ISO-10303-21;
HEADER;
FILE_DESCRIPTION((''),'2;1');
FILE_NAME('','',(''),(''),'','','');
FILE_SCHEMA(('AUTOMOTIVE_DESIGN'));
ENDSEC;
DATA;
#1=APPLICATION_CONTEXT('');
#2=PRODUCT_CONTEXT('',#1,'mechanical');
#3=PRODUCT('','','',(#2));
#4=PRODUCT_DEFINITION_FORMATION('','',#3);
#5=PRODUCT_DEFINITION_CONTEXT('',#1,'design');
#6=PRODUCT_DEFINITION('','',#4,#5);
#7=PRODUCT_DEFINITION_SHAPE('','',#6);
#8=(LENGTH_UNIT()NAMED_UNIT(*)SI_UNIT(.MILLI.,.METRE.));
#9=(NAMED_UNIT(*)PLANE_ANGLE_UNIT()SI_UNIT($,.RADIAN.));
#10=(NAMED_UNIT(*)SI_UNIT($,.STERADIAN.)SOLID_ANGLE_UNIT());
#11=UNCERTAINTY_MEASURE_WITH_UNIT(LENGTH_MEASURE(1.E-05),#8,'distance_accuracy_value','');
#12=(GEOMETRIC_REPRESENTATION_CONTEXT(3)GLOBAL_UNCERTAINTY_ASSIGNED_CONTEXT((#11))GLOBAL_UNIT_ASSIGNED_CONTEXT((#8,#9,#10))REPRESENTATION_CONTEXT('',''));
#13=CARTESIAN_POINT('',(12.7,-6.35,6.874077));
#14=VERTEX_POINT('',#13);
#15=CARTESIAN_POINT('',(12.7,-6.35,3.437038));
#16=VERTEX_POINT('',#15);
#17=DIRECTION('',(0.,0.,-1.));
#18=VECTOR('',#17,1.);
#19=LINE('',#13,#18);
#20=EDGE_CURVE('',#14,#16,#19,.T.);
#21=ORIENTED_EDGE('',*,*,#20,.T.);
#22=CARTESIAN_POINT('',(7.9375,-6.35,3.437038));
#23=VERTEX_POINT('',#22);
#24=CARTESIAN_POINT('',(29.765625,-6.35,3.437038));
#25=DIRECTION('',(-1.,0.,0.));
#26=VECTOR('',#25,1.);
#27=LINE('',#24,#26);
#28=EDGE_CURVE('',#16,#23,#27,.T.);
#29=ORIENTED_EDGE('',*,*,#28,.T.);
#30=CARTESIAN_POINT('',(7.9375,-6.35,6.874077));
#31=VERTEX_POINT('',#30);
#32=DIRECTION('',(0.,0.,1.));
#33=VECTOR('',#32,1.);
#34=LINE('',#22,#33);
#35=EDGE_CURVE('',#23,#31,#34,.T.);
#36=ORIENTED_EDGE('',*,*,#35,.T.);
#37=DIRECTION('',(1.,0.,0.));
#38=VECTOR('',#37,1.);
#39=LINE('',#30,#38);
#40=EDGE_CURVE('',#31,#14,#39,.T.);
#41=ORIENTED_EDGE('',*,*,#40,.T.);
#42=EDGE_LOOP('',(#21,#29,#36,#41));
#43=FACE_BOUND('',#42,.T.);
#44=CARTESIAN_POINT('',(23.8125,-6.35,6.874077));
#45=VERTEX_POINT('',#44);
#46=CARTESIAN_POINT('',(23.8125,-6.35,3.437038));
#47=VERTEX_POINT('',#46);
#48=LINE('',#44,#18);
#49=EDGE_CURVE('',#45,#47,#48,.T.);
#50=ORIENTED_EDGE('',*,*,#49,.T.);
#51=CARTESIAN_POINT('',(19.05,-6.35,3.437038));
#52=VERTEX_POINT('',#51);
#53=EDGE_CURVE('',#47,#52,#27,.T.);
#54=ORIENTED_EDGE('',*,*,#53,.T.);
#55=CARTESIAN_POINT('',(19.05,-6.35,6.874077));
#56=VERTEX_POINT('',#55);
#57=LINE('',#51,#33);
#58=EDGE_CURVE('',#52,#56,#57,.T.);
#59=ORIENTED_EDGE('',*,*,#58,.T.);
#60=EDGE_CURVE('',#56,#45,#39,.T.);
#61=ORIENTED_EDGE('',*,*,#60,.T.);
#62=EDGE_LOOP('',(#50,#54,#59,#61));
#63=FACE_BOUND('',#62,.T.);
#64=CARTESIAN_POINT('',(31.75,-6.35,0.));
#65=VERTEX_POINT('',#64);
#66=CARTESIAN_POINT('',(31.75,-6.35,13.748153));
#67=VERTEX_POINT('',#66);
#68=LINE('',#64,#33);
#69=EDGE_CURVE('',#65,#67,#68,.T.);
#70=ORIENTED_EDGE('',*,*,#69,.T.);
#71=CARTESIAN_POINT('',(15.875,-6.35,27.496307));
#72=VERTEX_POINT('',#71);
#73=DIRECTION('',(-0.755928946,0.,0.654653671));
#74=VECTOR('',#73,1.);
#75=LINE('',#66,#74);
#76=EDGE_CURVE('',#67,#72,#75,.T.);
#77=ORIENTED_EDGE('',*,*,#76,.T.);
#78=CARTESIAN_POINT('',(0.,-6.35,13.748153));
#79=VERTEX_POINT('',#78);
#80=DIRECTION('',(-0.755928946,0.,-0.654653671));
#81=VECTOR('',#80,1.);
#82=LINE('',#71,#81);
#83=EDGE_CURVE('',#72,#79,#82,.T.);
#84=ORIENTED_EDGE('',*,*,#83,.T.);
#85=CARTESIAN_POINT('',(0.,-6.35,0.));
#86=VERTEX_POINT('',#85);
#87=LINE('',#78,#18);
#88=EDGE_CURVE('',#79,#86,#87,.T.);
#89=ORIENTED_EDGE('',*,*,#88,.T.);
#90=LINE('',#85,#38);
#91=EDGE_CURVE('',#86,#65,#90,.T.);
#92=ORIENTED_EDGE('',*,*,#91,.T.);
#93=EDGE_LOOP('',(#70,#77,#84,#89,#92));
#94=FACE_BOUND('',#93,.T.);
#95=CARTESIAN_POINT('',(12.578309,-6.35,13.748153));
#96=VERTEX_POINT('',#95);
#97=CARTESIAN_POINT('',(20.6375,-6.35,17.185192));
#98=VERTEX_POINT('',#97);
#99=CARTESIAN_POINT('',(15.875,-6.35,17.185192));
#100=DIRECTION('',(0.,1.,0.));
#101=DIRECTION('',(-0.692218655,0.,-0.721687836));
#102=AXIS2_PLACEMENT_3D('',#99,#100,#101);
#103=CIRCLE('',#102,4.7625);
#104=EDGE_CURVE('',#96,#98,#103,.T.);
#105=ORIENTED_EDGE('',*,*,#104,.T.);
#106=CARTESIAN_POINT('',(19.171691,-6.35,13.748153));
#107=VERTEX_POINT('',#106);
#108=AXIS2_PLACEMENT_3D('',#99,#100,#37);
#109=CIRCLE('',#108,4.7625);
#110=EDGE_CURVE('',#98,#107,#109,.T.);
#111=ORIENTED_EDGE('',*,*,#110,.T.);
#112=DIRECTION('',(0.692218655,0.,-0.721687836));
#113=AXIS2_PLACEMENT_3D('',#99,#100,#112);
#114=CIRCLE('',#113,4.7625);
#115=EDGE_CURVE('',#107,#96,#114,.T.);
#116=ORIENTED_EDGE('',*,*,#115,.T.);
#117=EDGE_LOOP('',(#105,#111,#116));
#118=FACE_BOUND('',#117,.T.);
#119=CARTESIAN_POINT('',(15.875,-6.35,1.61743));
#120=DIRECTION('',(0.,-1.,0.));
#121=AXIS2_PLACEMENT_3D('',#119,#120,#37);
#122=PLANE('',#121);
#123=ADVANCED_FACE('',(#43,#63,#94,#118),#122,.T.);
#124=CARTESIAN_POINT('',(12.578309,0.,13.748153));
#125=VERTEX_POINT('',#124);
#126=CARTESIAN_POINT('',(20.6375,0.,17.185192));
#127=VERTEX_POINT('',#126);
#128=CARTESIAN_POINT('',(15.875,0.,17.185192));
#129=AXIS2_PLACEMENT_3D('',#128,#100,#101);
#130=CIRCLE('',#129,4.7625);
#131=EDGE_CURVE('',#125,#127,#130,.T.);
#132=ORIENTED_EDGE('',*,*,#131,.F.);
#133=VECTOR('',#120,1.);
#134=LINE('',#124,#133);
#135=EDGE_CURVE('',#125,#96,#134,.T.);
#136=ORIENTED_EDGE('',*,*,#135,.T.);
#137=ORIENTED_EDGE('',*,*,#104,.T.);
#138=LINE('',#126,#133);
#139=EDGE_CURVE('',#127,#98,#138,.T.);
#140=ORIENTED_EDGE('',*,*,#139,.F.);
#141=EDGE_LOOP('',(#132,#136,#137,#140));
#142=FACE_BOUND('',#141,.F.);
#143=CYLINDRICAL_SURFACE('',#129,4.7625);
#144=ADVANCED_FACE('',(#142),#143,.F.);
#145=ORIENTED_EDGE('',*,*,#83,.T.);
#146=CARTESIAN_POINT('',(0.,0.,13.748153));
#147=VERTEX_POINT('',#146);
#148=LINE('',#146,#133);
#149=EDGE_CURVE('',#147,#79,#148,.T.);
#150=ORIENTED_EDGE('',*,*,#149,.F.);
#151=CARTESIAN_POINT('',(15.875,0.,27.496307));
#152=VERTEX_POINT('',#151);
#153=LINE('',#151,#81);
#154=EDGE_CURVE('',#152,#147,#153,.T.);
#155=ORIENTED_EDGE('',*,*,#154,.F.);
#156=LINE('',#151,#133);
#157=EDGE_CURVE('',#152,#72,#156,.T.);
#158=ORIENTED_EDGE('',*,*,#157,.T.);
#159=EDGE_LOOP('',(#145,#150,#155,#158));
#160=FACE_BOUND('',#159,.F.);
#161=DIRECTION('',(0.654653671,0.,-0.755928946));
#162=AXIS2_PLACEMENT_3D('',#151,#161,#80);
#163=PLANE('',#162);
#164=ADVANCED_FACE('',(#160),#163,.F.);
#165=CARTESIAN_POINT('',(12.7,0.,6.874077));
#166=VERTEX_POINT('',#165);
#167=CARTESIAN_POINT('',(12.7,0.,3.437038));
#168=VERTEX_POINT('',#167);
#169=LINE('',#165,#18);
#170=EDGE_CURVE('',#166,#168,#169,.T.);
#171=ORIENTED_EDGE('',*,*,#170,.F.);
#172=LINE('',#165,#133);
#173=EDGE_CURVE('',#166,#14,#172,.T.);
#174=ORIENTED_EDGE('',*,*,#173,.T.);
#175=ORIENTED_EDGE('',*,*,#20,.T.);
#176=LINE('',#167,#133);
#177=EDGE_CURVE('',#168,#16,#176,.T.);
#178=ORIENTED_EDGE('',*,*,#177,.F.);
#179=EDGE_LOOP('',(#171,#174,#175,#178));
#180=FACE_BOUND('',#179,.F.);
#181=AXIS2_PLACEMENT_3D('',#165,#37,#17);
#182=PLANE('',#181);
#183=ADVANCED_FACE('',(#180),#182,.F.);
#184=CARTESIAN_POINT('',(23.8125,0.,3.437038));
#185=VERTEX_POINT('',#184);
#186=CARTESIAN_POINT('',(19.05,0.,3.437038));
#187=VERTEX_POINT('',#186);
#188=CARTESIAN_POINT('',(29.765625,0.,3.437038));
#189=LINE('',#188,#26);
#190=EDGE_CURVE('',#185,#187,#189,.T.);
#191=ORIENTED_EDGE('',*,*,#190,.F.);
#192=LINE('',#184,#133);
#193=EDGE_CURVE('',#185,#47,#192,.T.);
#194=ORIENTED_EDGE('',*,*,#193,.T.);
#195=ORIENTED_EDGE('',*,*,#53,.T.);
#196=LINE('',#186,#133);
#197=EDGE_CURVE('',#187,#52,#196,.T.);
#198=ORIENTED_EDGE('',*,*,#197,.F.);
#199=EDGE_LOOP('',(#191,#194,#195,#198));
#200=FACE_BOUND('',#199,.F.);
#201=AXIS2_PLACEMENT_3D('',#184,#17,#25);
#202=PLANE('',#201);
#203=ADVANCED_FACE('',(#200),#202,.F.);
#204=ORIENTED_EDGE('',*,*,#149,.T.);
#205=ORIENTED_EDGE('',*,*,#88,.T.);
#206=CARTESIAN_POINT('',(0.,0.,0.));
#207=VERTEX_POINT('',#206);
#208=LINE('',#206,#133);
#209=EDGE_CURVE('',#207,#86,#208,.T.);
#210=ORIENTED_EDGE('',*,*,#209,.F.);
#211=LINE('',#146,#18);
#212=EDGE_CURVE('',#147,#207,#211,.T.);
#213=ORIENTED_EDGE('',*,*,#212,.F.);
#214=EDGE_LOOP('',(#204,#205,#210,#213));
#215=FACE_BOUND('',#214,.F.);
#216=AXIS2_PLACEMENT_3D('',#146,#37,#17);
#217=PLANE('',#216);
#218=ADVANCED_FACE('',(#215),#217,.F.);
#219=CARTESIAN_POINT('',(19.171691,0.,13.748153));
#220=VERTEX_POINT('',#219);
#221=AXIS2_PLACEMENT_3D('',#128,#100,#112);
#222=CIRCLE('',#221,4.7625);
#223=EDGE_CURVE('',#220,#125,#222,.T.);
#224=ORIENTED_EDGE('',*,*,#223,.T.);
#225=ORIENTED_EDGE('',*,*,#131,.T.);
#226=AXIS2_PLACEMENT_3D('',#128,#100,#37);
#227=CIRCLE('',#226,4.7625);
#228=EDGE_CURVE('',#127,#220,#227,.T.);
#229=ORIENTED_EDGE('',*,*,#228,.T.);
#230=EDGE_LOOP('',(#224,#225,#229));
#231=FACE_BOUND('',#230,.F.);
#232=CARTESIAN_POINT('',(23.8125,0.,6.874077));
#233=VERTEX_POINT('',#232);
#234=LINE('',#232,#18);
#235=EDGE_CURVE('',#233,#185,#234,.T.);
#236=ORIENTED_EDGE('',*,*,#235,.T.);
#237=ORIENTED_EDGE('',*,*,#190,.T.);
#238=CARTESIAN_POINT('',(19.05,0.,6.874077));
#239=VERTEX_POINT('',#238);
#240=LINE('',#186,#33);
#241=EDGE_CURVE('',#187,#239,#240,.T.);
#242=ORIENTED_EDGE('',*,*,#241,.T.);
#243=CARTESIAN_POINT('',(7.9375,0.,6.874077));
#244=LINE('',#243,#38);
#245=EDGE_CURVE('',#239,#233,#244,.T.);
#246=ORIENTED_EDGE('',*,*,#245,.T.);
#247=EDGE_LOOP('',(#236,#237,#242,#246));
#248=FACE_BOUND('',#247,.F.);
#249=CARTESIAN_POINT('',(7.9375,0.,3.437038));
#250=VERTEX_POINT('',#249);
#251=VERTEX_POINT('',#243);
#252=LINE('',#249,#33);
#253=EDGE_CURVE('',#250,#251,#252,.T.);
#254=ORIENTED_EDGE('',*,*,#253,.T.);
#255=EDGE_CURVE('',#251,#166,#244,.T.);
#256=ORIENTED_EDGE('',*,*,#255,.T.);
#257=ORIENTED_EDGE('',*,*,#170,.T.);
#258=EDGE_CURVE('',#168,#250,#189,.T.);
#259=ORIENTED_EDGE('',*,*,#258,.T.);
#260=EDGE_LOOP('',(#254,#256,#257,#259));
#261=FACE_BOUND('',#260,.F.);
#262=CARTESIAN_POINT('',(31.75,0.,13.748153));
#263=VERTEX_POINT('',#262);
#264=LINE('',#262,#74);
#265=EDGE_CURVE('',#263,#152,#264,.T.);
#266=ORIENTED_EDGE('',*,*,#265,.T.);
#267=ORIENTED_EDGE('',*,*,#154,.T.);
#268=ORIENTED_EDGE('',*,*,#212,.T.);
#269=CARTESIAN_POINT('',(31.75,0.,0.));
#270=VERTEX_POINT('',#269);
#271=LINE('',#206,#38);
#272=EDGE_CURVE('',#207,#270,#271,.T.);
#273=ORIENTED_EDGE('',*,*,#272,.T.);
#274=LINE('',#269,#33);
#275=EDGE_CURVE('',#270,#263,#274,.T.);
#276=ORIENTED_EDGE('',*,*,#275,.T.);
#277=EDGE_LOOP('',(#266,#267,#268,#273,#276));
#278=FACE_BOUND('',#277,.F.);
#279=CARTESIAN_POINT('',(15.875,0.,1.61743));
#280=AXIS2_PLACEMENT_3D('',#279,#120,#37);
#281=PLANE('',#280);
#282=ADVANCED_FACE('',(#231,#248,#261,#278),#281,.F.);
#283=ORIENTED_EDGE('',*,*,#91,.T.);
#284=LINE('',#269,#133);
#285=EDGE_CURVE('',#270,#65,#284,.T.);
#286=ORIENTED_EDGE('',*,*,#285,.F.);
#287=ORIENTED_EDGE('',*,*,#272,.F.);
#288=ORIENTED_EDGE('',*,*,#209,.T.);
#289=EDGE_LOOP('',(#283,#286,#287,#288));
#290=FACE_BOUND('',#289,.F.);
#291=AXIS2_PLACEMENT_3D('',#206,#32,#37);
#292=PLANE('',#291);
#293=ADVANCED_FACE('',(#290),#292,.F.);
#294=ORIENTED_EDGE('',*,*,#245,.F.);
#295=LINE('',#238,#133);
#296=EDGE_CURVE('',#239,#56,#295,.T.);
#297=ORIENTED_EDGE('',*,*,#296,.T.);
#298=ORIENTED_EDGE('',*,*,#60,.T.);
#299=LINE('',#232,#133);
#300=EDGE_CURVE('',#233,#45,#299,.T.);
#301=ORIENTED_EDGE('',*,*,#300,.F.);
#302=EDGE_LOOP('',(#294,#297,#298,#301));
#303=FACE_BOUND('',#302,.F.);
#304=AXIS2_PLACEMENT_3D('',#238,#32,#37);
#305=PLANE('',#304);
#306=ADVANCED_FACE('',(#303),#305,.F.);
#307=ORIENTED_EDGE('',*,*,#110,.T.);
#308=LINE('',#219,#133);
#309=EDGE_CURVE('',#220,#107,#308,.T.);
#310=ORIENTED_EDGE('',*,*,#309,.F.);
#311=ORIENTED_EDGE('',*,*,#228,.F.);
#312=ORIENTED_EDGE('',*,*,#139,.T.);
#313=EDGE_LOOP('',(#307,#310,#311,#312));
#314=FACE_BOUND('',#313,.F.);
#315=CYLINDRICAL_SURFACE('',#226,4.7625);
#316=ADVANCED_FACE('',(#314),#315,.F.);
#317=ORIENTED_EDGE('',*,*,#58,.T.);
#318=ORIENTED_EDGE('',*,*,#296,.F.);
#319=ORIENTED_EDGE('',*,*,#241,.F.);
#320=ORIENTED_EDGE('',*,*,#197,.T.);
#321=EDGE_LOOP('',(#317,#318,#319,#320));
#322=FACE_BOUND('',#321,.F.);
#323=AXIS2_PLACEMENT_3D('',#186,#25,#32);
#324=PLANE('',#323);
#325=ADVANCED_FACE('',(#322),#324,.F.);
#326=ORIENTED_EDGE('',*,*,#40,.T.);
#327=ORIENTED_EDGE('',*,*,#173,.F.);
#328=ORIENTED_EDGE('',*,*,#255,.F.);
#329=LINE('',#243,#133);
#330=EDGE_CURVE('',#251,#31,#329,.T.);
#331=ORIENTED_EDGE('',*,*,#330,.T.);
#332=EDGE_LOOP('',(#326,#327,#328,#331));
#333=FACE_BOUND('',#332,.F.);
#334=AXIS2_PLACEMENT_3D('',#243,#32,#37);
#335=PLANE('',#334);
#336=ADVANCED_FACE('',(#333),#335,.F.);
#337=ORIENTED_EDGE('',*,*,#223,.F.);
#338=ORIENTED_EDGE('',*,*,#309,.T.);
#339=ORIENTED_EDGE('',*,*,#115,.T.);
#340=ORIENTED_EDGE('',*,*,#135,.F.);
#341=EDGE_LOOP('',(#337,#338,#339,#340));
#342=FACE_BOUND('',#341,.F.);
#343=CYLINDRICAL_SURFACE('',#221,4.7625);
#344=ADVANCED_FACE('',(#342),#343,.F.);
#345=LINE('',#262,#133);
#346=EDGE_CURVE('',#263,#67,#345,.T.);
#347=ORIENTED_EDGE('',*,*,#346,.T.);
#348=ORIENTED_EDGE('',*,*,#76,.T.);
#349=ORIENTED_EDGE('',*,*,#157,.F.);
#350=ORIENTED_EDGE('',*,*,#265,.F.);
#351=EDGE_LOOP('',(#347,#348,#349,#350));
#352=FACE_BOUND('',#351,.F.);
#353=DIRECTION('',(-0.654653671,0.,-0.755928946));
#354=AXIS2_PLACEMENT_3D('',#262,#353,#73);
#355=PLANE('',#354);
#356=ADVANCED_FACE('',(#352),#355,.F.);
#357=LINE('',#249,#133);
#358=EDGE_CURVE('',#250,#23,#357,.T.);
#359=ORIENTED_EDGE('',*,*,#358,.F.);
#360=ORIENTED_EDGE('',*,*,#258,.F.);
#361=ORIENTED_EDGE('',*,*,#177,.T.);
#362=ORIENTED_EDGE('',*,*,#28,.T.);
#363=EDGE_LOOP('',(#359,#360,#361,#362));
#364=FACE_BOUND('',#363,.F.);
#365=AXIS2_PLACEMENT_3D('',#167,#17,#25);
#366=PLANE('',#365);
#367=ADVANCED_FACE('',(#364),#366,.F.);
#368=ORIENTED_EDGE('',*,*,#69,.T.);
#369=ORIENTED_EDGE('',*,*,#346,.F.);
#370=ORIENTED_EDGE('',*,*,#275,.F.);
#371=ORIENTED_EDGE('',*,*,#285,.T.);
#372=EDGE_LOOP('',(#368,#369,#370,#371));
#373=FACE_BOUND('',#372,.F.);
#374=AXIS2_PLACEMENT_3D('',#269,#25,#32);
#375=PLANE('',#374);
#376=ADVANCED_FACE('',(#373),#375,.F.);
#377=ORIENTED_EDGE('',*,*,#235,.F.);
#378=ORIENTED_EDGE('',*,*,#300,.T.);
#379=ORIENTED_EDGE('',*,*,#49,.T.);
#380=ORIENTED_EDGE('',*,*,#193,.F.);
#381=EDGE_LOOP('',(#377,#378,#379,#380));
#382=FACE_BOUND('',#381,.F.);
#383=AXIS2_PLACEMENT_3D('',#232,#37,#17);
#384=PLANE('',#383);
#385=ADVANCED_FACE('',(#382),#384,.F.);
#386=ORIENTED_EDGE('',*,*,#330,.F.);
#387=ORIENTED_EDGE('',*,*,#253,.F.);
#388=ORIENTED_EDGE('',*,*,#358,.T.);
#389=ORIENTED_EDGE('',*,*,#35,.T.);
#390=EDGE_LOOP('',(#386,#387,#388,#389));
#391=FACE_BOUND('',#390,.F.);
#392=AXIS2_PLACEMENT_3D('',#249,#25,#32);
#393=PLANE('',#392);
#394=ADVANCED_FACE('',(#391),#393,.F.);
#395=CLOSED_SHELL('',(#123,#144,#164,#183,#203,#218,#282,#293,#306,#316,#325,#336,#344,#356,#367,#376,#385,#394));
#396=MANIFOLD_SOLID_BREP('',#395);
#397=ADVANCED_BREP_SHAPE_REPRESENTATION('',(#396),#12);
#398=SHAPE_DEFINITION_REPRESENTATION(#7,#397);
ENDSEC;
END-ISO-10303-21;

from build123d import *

# Parameters (mm, degrees)
F1_DEPTH = 6.35


# Not quite as in the source:
# - a feature names something its author has since deleted; it is built from what else it names


with BuildPart() as f1:
    # F0 (on Front) → F1 (new body)
    with BuildSketch(Plane.XZ):
        Polygon((1.984375, 3.4370383213), (0, 0), (7.9375, 0), (15.875, 0), (31.75, 0), (29.765625, 3.4370383213), (23.8125, 3.4370383213), (19.05, 3.4370383213), (15.875, 3.4370383213), (12.7, 3.4370383213), (11.90625, 3.4370383213), (7.9375, 3.4370383213), align=None)
        Polygon((0, 3.4370383213), (0, 0), (1.984375, 3.4370383213), align=None)
        Polygon((0, 3.4370383213), (1.984375, 3.4370383213), (7.9375, 13.7481532851), (0, 13.7481532851), (0, 6.8740766425), align=None)
        with BuildLine():
            Line((7.9375, 13.7481532851), (1.984375, 3.4370383213))
            Line((1.984375, 3.4370383213), (7.9375, 3.4370383213))
            Line((7.9375, 3.4370383213), (7.9375, 6.8740766425))
            Line((7.9375, 6.8740766425), (12.7, 6.8740766425))
            Line((12.7, 6.8740766425), (15.875, 6.8740766425))
            Line((15.875, 6.8740766425), (19.05, 6.8740766425))
            Line((19.05, 6.8740766425), (23.8125, 6.8740766425))
            Line((23.8125, 6.8740766425), (23.8125, 3.4370383213))
            Line((23.8125, 3.4370383213), (29.765625, 3.4370383213))
            Line((29.765625, 3.4370383213), (23.8125, 13.7481532851))
            Line((23.8125, 13.7481532851), (19.1716913456, 13.7481532851))
            ThreePointArc((19.1716913456, 13.7481532851), (15.875, 12.4226916063), (12.5783086544, 13.7481532851))
            Line((12.5783086544, 13.7481532851), (7.9375, 13.7481532851))
        make_face()
        Polygon((0, 13.7481532851), (7.9375, 13.7481532851), (15.875, 27.4963065702), align=None)
        with BuildLine():
            Line((15.875, 27.4963065702), (7.9375, 13.7481532851))
            Line((7.9375, 13.7481532851), (12.5783086544, 13.7481532851))
            ThreePointArc((12.5783086544, 13.7481532851), (14.0067235595, 21.56593919), (20.6375, 17.1851916063))
            ThreePointArc((20.6375, 17.1851916063), (20.2557475837, 15.3169151658), (19.1716913456, 13.7481532851))
            Line((19.1716913456, 13.7481532851), (23.8125, 13.7481532851))
            Line((23.8125, 13.7481532851), (15.875, 27.4963065702))
        make_face()
        Polygon((29.765625, 3.4370383213), (31.75, 0), (31.75, 3.4370383213), align=None)
        Polygon((31.75, 13.7481532851), (15.875, 27.4963065702), (23.8125, 13.7481532851), align=None)
        Polygon((23.8125, 13.7481532851), (29.765625, 3.4370383213), (31.75, 3.4370383213), (31.75, 13.7481532851), align=None)
        Polygon((12.7, 6.8740766425), (12.7, 3.4370383213), (15.875, 3.4370383213), (19.05, 3.4370383213), (19.05, 6.8740766425), (15.875, 6.8740766425), align=None)
    extrude(amount=F1_DEPTH)


solid = f1.part
